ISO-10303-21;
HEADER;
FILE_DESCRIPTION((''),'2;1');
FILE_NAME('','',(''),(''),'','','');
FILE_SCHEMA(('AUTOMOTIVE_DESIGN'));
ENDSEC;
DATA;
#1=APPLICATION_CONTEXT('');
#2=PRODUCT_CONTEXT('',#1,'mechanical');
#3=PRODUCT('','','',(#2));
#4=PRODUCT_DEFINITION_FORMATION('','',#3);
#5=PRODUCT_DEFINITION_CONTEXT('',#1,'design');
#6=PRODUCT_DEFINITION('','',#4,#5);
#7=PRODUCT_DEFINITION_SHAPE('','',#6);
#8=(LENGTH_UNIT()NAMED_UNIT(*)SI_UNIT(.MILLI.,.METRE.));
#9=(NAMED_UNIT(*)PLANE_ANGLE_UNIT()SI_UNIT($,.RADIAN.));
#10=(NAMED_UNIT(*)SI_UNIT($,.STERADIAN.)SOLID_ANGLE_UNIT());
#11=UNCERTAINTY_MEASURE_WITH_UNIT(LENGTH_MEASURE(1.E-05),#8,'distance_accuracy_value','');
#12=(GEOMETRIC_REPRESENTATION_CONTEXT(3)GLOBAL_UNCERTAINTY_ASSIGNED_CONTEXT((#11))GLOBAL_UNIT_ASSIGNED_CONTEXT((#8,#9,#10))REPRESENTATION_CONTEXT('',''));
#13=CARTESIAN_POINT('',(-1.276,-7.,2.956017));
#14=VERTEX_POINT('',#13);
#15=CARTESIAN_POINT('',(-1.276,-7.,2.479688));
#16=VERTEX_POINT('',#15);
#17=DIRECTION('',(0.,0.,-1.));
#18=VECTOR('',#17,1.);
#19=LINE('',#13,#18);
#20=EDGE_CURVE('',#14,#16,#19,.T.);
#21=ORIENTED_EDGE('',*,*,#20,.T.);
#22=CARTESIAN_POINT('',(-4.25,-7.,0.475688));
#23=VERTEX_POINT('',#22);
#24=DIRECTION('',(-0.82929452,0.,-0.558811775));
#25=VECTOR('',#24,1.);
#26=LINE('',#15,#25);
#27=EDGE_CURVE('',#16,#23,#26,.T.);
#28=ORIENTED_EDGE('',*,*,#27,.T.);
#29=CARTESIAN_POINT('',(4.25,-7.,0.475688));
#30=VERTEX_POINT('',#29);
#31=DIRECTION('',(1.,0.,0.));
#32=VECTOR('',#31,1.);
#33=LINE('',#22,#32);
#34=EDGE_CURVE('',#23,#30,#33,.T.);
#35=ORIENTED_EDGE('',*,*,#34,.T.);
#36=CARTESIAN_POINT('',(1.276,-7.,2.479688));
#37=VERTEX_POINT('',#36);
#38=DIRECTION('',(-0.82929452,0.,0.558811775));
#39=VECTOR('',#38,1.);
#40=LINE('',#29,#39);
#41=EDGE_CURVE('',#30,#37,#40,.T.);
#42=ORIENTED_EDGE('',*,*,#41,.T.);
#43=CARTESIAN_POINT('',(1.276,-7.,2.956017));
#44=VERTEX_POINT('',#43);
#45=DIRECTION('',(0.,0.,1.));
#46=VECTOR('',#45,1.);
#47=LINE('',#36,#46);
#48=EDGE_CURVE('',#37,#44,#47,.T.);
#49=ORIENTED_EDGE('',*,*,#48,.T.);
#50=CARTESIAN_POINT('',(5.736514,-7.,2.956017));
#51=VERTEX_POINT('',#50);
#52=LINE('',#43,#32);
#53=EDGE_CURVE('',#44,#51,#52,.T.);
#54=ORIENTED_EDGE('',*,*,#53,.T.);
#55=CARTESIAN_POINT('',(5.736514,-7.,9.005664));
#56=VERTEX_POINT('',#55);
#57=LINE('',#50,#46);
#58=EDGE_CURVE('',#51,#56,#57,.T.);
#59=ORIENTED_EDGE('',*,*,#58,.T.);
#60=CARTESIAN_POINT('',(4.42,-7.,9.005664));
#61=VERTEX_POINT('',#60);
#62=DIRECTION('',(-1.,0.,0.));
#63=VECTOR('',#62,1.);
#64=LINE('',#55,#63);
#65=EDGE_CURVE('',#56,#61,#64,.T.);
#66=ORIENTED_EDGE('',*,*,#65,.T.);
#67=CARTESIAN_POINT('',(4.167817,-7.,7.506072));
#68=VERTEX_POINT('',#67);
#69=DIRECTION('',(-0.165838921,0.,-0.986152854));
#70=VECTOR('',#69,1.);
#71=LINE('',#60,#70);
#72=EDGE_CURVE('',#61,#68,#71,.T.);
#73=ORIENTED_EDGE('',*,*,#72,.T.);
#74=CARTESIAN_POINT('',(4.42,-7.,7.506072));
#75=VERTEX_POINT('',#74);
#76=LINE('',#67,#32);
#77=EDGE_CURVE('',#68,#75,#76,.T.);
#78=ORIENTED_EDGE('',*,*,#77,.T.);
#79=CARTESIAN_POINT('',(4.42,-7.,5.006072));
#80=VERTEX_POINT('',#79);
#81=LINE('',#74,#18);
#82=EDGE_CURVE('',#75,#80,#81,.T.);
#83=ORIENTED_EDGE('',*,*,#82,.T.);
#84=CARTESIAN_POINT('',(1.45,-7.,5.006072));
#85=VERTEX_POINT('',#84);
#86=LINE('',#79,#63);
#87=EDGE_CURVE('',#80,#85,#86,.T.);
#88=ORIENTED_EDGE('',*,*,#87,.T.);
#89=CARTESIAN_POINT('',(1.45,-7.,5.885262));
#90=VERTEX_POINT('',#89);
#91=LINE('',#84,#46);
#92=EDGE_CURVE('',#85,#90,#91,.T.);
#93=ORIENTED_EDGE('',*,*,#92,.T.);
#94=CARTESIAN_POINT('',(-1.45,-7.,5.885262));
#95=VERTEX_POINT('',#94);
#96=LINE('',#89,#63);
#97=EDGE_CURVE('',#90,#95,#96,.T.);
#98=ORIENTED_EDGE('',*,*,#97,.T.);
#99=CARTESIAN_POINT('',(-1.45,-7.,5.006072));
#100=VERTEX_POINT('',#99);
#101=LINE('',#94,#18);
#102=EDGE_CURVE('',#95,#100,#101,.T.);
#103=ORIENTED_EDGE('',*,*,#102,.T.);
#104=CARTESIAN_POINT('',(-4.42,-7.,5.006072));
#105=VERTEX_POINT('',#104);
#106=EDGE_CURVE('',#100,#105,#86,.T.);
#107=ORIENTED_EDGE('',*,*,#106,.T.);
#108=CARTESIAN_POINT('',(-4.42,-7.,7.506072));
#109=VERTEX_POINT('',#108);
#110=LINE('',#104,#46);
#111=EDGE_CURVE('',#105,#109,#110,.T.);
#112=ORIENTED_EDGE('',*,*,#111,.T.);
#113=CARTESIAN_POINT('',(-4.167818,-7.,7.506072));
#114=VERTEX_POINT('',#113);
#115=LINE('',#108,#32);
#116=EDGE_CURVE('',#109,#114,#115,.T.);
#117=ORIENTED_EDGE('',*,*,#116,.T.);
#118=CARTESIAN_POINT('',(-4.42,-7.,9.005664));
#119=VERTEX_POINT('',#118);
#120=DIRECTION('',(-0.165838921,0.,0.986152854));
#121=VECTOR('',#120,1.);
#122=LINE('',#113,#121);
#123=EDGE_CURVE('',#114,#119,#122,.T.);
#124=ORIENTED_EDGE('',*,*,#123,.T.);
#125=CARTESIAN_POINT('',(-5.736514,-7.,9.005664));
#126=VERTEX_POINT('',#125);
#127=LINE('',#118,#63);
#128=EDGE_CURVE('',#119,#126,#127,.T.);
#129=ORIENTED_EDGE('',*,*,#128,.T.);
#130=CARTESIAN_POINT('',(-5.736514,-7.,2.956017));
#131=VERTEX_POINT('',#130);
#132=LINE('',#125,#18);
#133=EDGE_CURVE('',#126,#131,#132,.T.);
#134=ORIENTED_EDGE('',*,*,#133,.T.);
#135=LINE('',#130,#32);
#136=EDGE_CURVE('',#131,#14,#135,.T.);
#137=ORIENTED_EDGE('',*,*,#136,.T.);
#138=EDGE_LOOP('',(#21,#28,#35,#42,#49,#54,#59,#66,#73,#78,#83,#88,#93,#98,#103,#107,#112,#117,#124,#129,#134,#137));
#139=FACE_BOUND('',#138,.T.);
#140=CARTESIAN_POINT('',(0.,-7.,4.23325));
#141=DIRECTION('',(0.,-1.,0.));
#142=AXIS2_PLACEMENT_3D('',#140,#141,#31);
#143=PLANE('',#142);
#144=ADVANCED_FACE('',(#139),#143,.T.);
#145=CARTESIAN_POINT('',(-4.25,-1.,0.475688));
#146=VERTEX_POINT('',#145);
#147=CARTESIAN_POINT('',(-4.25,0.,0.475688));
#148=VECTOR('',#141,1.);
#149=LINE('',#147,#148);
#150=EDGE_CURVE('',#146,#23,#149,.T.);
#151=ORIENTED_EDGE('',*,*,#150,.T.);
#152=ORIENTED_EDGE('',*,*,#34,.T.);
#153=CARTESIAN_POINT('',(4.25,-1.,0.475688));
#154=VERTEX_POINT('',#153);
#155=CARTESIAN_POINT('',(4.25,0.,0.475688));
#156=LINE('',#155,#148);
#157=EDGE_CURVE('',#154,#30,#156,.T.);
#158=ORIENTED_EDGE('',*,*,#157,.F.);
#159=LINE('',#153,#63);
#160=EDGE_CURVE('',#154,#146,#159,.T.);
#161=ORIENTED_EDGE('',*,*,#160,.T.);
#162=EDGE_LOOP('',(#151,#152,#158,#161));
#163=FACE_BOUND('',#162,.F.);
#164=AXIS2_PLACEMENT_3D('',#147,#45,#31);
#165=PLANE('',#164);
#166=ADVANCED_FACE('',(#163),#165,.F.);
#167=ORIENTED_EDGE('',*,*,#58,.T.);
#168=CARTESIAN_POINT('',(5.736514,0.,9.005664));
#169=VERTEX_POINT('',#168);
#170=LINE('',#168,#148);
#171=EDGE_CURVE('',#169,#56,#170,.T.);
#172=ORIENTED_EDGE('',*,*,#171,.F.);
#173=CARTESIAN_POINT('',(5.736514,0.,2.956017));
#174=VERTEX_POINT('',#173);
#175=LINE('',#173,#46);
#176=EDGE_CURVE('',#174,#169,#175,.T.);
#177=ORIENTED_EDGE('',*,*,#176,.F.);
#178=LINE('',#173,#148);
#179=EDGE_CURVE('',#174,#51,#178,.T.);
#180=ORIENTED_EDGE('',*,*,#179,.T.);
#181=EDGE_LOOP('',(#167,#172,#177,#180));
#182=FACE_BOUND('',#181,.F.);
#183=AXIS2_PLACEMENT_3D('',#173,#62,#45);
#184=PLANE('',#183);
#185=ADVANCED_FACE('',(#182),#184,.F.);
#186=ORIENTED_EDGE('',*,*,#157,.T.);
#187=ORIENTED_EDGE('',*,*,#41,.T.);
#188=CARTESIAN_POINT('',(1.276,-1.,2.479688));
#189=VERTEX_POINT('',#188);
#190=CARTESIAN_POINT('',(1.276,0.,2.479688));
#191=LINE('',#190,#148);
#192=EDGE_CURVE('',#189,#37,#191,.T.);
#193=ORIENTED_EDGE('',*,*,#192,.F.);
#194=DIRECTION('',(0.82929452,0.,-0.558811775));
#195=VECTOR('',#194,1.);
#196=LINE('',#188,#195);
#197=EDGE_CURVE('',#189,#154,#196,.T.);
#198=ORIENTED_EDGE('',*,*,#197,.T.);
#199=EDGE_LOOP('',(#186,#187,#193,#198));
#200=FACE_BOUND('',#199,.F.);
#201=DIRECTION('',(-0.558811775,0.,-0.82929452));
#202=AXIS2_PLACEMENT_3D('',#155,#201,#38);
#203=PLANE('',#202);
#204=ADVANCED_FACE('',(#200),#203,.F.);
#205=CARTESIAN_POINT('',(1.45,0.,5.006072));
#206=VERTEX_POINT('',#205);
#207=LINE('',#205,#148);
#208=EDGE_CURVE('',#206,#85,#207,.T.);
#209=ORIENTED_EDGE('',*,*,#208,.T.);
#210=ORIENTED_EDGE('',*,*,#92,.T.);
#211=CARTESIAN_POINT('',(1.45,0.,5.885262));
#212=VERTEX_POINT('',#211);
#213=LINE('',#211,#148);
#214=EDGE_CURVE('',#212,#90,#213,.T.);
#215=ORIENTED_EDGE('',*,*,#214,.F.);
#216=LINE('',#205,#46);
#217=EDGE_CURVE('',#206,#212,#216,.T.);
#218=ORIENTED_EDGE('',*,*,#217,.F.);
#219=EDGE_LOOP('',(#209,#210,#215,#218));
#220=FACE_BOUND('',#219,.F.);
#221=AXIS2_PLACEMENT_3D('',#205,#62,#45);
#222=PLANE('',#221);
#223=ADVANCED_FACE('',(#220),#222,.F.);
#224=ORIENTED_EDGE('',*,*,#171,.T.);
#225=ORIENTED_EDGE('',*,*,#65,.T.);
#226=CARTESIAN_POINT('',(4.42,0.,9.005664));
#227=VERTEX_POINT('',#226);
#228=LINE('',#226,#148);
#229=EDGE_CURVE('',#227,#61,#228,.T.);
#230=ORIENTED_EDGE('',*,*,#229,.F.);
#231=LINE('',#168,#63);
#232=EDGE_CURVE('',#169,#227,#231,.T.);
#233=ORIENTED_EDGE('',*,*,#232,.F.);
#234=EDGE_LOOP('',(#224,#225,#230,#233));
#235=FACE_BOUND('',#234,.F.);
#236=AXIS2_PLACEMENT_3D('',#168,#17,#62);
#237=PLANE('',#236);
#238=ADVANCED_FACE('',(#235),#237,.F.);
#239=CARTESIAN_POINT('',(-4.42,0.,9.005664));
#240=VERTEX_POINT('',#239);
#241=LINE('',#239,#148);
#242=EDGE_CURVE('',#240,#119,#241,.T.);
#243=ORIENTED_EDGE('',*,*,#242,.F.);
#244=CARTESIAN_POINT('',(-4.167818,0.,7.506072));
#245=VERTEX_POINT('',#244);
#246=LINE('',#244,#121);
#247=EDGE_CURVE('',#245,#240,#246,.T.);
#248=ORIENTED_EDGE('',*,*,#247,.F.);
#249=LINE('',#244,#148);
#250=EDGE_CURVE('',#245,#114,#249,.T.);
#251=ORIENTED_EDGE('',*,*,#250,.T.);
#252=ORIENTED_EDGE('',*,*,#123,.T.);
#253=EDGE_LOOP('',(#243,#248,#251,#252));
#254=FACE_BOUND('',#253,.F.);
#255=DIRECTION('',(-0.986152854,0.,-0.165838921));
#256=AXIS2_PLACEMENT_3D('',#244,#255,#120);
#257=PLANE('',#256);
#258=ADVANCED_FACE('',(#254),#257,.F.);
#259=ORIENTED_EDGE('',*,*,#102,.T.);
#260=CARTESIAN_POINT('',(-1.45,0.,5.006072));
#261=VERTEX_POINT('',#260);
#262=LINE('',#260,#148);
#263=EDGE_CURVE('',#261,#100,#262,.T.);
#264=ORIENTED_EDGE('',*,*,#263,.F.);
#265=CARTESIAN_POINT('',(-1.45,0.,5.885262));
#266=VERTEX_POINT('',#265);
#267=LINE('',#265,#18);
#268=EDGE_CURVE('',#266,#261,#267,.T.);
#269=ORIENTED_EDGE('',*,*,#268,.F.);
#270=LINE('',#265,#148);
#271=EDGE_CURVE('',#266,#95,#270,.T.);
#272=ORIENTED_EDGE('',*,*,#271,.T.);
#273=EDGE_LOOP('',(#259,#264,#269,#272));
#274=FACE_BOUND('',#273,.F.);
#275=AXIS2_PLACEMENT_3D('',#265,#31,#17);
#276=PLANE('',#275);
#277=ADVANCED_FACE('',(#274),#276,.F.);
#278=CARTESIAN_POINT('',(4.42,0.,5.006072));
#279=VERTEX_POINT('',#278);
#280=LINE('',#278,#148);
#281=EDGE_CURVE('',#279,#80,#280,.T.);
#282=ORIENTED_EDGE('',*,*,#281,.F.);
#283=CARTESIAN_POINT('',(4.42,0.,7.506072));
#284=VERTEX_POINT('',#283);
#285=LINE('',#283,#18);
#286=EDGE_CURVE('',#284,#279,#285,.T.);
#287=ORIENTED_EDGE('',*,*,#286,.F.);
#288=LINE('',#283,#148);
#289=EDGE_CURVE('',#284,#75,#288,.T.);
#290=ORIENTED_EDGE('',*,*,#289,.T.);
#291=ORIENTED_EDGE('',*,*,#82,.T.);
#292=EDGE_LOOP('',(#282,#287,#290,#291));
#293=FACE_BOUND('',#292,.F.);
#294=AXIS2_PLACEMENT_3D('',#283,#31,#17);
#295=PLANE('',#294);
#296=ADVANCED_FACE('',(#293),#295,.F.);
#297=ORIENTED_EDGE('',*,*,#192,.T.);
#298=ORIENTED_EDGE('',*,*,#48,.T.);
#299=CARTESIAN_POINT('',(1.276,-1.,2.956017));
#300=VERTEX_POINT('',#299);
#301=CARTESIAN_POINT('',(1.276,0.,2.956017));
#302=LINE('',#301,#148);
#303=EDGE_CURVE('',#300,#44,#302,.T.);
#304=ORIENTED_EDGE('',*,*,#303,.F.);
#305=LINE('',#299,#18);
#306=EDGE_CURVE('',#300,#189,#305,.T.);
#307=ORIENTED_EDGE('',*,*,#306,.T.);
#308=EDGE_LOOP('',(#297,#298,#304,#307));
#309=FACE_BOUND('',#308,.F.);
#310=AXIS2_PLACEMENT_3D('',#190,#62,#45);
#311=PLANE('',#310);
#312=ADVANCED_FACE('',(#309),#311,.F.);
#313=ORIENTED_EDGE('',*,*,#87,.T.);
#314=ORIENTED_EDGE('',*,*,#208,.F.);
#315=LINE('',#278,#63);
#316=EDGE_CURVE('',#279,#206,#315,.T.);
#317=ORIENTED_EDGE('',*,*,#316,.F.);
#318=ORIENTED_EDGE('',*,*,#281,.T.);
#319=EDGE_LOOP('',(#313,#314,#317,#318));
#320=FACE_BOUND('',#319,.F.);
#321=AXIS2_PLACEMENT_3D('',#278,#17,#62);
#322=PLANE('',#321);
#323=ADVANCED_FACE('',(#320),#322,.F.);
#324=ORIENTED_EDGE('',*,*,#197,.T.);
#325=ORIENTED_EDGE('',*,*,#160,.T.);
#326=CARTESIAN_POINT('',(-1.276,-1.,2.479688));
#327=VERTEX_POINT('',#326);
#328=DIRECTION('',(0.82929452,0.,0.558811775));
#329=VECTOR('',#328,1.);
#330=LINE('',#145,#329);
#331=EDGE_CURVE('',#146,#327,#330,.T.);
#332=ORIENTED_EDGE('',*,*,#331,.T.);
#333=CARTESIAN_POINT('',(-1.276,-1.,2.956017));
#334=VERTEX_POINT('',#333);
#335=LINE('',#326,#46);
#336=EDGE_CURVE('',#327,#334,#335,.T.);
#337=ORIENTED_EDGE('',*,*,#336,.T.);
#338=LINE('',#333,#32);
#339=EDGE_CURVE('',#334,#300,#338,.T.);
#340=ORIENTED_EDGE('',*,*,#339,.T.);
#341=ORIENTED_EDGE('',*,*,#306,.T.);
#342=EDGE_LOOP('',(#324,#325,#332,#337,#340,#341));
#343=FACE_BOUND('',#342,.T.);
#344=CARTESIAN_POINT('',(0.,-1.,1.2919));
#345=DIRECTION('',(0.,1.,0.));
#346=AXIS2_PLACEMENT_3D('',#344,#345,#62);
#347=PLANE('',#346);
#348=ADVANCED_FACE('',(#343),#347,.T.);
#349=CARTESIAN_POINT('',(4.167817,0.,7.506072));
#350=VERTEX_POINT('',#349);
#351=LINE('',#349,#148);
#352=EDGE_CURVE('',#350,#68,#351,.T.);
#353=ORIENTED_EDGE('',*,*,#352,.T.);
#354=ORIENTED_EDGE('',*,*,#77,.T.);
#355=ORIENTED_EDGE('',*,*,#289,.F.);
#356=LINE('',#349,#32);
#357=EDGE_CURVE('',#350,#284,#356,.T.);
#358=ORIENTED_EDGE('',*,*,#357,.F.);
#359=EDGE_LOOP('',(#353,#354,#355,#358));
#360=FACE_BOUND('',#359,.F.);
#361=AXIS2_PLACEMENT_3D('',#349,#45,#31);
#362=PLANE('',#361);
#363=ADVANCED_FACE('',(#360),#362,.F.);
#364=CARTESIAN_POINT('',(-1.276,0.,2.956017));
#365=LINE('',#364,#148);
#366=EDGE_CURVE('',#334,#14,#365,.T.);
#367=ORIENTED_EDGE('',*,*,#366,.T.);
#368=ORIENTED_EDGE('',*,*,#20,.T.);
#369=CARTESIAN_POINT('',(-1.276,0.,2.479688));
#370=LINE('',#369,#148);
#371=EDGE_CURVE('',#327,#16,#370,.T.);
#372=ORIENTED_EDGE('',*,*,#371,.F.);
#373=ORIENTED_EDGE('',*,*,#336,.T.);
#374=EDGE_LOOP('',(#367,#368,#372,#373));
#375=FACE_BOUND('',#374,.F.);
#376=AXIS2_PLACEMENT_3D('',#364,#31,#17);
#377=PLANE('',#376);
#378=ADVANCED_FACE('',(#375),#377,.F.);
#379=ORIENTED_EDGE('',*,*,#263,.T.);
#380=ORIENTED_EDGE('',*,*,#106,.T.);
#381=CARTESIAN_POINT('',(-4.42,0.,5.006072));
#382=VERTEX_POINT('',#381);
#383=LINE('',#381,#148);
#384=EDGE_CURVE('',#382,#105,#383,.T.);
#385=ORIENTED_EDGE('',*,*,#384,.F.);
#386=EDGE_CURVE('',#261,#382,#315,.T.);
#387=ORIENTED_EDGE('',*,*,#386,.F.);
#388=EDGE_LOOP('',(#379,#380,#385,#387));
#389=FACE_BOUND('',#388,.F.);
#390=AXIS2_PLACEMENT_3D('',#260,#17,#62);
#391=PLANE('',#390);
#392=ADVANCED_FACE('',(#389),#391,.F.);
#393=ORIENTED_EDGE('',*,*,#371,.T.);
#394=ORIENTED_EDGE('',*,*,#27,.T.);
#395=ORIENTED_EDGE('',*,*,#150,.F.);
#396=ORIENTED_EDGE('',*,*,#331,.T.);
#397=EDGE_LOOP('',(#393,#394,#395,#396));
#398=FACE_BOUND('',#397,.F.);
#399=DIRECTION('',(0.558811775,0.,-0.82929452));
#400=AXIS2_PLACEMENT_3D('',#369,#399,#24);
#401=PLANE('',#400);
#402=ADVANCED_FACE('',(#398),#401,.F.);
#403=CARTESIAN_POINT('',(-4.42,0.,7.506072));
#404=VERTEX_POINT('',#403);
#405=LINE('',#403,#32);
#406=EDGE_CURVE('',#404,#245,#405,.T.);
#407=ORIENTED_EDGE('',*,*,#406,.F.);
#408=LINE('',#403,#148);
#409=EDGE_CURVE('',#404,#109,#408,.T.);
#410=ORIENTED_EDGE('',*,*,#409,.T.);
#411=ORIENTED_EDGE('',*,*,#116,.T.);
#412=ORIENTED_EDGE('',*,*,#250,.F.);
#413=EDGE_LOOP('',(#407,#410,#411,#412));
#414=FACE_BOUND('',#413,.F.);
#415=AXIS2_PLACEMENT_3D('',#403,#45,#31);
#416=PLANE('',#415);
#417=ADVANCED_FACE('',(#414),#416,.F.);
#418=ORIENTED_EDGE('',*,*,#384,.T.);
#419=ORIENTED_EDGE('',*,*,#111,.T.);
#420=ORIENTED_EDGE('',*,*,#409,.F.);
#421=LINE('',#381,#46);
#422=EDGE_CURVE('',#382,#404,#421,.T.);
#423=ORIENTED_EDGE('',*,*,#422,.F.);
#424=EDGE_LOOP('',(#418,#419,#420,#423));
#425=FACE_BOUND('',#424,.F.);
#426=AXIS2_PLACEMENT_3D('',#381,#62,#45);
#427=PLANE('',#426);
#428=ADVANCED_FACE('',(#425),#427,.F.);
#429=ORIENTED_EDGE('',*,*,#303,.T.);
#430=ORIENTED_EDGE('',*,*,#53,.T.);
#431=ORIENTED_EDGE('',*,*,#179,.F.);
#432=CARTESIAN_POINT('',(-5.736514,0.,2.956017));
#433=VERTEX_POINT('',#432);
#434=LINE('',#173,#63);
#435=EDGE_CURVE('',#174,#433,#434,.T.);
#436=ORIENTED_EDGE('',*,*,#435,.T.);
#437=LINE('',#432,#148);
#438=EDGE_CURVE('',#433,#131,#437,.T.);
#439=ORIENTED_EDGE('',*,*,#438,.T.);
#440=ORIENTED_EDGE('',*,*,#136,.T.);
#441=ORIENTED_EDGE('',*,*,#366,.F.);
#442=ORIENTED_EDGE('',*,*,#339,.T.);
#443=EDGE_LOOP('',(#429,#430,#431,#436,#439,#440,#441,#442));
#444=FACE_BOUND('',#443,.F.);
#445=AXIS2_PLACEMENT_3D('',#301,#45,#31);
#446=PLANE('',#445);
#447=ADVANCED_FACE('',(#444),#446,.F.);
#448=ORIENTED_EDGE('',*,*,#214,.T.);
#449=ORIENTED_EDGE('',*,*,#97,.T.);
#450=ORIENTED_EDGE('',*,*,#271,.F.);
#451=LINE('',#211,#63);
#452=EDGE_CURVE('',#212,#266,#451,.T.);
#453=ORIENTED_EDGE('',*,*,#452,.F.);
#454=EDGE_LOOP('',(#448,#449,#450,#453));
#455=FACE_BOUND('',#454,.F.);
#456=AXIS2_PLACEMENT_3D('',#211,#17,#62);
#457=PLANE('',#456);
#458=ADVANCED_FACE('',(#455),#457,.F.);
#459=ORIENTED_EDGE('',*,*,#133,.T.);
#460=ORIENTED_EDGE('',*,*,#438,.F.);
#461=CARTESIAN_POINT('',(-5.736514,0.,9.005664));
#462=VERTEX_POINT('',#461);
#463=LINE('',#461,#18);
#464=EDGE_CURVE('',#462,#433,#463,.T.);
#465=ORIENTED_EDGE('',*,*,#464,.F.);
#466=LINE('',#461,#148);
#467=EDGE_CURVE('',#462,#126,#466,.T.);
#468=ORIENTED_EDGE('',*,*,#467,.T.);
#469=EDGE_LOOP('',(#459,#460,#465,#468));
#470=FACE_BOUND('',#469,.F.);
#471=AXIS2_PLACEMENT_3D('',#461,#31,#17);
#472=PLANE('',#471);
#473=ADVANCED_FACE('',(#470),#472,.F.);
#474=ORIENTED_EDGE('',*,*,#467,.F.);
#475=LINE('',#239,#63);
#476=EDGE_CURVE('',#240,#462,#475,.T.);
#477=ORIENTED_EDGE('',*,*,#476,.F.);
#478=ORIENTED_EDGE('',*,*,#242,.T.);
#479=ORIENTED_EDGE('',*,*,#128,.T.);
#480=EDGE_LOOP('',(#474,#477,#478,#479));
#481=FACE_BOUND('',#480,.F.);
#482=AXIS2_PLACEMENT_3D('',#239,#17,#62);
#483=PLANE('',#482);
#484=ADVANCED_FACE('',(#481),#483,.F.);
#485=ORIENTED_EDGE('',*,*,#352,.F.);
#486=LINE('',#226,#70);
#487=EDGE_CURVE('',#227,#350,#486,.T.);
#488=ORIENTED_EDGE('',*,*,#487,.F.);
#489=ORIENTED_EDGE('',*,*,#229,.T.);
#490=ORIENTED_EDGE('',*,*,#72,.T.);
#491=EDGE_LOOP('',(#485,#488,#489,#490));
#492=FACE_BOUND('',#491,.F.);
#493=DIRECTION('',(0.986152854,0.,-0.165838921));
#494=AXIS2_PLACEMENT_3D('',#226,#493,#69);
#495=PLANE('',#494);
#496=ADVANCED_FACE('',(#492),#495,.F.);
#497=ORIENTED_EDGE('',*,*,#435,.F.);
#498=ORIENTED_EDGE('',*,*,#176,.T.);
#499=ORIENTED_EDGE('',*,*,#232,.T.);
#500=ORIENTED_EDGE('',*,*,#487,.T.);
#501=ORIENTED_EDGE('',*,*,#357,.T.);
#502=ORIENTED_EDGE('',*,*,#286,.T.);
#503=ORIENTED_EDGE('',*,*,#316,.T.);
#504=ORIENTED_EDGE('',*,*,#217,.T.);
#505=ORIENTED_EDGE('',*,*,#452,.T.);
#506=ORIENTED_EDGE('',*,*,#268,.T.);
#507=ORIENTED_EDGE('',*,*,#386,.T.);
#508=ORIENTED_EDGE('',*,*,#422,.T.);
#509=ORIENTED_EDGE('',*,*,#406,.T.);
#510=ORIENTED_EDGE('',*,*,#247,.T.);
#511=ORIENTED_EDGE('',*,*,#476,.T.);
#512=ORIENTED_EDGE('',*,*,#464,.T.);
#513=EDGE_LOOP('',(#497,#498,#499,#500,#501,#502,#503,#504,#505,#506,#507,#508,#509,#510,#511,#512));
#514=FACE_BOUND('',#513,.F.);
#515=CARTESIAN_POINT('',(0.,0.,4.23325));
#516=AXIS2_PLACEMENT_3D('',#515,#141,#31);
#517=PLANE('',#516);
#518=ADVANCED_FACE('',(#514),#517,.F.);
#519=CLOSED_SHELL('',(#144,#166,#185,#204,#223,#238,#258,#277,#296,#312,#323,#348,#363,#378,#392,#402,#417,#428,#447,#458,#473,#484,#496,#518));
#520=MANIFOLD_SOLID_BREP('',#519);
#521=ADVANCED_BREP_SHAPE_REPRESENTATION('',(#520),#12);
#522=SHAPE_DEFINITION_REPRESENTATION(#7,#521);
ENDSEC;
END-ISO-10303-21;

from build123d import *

# Parameters (mm, degrees)
F1_DEPTH = 7
F3_DEPTH = 1


# Not quite as in the source:
# - ends of sketch curves that miss each other by under 0.0002 mm in the source are joined


with BuildPart() as f1:
    # F0 (on Front) → F1 (new body)
    with BuildSketch(Plane.XZ):
        Polygon((-1.4500004135, 5.0060716327), (-2.9995756401, 5.0060716327), (-4.4200004135, 5.0060716327), (-4.4200004135, 7.5060716327), (-4.1678175591, 7.5060716327), (-4.4200004135, 9.0056643691), (-5.7365144081, 9.0056643691), (-5.7365144081, 2.9560173731), (-1.276, 2.9560173731), (-1.276, 2.479687877), (-4.25, 0.475687877), (0, 0.475687877), (4.25, 0.475687877), (1.276, 2.479687877), (1.276, 2.9560173731), (5.7365144081, 2.9560173731), (5.7365144081, 9.0056643691), (4.4200002068, 9.0056643691), (4.1678173524, 7.5060716327), (4.4200002068, 7.5060716327), (4.4200002068, 5.0060716327), (2.9995754333, 5.0060716327), (1.4500002068, 5.0060716327), (2.068e-07, 5.0060716327), align=None)
        Polygon((-1.4500004135, 5.8852624949), (-1.4500004135, 5.0060716327), (-4.135e-07, 5.0060716327), (1.4500002068, 5.0060716327), (1.4500002068, 5.8852624949), (2.068e-07, 5.8852624949), align=None)
    extrude(amount=F1_DEPTH)

    # F2 (on face) → F3 (cut)
    with BuildSketch(Plane(origin=(0, 0, 0), x_dir=(-1, 0, 0), z_dir=(0, 1, 0))):
        Polygon((1.276, 2.9560173731), (-1.276, 2.9560173731), (-1.276, 2.479687877), (-4.25, 0.475687877), (4.25, 0.475687877), (1.276, 2.479687877), align=None)
    extrude(amount=-F3_DEPTH, mode=Mode.SUBTRACT)


solid = f1.part
